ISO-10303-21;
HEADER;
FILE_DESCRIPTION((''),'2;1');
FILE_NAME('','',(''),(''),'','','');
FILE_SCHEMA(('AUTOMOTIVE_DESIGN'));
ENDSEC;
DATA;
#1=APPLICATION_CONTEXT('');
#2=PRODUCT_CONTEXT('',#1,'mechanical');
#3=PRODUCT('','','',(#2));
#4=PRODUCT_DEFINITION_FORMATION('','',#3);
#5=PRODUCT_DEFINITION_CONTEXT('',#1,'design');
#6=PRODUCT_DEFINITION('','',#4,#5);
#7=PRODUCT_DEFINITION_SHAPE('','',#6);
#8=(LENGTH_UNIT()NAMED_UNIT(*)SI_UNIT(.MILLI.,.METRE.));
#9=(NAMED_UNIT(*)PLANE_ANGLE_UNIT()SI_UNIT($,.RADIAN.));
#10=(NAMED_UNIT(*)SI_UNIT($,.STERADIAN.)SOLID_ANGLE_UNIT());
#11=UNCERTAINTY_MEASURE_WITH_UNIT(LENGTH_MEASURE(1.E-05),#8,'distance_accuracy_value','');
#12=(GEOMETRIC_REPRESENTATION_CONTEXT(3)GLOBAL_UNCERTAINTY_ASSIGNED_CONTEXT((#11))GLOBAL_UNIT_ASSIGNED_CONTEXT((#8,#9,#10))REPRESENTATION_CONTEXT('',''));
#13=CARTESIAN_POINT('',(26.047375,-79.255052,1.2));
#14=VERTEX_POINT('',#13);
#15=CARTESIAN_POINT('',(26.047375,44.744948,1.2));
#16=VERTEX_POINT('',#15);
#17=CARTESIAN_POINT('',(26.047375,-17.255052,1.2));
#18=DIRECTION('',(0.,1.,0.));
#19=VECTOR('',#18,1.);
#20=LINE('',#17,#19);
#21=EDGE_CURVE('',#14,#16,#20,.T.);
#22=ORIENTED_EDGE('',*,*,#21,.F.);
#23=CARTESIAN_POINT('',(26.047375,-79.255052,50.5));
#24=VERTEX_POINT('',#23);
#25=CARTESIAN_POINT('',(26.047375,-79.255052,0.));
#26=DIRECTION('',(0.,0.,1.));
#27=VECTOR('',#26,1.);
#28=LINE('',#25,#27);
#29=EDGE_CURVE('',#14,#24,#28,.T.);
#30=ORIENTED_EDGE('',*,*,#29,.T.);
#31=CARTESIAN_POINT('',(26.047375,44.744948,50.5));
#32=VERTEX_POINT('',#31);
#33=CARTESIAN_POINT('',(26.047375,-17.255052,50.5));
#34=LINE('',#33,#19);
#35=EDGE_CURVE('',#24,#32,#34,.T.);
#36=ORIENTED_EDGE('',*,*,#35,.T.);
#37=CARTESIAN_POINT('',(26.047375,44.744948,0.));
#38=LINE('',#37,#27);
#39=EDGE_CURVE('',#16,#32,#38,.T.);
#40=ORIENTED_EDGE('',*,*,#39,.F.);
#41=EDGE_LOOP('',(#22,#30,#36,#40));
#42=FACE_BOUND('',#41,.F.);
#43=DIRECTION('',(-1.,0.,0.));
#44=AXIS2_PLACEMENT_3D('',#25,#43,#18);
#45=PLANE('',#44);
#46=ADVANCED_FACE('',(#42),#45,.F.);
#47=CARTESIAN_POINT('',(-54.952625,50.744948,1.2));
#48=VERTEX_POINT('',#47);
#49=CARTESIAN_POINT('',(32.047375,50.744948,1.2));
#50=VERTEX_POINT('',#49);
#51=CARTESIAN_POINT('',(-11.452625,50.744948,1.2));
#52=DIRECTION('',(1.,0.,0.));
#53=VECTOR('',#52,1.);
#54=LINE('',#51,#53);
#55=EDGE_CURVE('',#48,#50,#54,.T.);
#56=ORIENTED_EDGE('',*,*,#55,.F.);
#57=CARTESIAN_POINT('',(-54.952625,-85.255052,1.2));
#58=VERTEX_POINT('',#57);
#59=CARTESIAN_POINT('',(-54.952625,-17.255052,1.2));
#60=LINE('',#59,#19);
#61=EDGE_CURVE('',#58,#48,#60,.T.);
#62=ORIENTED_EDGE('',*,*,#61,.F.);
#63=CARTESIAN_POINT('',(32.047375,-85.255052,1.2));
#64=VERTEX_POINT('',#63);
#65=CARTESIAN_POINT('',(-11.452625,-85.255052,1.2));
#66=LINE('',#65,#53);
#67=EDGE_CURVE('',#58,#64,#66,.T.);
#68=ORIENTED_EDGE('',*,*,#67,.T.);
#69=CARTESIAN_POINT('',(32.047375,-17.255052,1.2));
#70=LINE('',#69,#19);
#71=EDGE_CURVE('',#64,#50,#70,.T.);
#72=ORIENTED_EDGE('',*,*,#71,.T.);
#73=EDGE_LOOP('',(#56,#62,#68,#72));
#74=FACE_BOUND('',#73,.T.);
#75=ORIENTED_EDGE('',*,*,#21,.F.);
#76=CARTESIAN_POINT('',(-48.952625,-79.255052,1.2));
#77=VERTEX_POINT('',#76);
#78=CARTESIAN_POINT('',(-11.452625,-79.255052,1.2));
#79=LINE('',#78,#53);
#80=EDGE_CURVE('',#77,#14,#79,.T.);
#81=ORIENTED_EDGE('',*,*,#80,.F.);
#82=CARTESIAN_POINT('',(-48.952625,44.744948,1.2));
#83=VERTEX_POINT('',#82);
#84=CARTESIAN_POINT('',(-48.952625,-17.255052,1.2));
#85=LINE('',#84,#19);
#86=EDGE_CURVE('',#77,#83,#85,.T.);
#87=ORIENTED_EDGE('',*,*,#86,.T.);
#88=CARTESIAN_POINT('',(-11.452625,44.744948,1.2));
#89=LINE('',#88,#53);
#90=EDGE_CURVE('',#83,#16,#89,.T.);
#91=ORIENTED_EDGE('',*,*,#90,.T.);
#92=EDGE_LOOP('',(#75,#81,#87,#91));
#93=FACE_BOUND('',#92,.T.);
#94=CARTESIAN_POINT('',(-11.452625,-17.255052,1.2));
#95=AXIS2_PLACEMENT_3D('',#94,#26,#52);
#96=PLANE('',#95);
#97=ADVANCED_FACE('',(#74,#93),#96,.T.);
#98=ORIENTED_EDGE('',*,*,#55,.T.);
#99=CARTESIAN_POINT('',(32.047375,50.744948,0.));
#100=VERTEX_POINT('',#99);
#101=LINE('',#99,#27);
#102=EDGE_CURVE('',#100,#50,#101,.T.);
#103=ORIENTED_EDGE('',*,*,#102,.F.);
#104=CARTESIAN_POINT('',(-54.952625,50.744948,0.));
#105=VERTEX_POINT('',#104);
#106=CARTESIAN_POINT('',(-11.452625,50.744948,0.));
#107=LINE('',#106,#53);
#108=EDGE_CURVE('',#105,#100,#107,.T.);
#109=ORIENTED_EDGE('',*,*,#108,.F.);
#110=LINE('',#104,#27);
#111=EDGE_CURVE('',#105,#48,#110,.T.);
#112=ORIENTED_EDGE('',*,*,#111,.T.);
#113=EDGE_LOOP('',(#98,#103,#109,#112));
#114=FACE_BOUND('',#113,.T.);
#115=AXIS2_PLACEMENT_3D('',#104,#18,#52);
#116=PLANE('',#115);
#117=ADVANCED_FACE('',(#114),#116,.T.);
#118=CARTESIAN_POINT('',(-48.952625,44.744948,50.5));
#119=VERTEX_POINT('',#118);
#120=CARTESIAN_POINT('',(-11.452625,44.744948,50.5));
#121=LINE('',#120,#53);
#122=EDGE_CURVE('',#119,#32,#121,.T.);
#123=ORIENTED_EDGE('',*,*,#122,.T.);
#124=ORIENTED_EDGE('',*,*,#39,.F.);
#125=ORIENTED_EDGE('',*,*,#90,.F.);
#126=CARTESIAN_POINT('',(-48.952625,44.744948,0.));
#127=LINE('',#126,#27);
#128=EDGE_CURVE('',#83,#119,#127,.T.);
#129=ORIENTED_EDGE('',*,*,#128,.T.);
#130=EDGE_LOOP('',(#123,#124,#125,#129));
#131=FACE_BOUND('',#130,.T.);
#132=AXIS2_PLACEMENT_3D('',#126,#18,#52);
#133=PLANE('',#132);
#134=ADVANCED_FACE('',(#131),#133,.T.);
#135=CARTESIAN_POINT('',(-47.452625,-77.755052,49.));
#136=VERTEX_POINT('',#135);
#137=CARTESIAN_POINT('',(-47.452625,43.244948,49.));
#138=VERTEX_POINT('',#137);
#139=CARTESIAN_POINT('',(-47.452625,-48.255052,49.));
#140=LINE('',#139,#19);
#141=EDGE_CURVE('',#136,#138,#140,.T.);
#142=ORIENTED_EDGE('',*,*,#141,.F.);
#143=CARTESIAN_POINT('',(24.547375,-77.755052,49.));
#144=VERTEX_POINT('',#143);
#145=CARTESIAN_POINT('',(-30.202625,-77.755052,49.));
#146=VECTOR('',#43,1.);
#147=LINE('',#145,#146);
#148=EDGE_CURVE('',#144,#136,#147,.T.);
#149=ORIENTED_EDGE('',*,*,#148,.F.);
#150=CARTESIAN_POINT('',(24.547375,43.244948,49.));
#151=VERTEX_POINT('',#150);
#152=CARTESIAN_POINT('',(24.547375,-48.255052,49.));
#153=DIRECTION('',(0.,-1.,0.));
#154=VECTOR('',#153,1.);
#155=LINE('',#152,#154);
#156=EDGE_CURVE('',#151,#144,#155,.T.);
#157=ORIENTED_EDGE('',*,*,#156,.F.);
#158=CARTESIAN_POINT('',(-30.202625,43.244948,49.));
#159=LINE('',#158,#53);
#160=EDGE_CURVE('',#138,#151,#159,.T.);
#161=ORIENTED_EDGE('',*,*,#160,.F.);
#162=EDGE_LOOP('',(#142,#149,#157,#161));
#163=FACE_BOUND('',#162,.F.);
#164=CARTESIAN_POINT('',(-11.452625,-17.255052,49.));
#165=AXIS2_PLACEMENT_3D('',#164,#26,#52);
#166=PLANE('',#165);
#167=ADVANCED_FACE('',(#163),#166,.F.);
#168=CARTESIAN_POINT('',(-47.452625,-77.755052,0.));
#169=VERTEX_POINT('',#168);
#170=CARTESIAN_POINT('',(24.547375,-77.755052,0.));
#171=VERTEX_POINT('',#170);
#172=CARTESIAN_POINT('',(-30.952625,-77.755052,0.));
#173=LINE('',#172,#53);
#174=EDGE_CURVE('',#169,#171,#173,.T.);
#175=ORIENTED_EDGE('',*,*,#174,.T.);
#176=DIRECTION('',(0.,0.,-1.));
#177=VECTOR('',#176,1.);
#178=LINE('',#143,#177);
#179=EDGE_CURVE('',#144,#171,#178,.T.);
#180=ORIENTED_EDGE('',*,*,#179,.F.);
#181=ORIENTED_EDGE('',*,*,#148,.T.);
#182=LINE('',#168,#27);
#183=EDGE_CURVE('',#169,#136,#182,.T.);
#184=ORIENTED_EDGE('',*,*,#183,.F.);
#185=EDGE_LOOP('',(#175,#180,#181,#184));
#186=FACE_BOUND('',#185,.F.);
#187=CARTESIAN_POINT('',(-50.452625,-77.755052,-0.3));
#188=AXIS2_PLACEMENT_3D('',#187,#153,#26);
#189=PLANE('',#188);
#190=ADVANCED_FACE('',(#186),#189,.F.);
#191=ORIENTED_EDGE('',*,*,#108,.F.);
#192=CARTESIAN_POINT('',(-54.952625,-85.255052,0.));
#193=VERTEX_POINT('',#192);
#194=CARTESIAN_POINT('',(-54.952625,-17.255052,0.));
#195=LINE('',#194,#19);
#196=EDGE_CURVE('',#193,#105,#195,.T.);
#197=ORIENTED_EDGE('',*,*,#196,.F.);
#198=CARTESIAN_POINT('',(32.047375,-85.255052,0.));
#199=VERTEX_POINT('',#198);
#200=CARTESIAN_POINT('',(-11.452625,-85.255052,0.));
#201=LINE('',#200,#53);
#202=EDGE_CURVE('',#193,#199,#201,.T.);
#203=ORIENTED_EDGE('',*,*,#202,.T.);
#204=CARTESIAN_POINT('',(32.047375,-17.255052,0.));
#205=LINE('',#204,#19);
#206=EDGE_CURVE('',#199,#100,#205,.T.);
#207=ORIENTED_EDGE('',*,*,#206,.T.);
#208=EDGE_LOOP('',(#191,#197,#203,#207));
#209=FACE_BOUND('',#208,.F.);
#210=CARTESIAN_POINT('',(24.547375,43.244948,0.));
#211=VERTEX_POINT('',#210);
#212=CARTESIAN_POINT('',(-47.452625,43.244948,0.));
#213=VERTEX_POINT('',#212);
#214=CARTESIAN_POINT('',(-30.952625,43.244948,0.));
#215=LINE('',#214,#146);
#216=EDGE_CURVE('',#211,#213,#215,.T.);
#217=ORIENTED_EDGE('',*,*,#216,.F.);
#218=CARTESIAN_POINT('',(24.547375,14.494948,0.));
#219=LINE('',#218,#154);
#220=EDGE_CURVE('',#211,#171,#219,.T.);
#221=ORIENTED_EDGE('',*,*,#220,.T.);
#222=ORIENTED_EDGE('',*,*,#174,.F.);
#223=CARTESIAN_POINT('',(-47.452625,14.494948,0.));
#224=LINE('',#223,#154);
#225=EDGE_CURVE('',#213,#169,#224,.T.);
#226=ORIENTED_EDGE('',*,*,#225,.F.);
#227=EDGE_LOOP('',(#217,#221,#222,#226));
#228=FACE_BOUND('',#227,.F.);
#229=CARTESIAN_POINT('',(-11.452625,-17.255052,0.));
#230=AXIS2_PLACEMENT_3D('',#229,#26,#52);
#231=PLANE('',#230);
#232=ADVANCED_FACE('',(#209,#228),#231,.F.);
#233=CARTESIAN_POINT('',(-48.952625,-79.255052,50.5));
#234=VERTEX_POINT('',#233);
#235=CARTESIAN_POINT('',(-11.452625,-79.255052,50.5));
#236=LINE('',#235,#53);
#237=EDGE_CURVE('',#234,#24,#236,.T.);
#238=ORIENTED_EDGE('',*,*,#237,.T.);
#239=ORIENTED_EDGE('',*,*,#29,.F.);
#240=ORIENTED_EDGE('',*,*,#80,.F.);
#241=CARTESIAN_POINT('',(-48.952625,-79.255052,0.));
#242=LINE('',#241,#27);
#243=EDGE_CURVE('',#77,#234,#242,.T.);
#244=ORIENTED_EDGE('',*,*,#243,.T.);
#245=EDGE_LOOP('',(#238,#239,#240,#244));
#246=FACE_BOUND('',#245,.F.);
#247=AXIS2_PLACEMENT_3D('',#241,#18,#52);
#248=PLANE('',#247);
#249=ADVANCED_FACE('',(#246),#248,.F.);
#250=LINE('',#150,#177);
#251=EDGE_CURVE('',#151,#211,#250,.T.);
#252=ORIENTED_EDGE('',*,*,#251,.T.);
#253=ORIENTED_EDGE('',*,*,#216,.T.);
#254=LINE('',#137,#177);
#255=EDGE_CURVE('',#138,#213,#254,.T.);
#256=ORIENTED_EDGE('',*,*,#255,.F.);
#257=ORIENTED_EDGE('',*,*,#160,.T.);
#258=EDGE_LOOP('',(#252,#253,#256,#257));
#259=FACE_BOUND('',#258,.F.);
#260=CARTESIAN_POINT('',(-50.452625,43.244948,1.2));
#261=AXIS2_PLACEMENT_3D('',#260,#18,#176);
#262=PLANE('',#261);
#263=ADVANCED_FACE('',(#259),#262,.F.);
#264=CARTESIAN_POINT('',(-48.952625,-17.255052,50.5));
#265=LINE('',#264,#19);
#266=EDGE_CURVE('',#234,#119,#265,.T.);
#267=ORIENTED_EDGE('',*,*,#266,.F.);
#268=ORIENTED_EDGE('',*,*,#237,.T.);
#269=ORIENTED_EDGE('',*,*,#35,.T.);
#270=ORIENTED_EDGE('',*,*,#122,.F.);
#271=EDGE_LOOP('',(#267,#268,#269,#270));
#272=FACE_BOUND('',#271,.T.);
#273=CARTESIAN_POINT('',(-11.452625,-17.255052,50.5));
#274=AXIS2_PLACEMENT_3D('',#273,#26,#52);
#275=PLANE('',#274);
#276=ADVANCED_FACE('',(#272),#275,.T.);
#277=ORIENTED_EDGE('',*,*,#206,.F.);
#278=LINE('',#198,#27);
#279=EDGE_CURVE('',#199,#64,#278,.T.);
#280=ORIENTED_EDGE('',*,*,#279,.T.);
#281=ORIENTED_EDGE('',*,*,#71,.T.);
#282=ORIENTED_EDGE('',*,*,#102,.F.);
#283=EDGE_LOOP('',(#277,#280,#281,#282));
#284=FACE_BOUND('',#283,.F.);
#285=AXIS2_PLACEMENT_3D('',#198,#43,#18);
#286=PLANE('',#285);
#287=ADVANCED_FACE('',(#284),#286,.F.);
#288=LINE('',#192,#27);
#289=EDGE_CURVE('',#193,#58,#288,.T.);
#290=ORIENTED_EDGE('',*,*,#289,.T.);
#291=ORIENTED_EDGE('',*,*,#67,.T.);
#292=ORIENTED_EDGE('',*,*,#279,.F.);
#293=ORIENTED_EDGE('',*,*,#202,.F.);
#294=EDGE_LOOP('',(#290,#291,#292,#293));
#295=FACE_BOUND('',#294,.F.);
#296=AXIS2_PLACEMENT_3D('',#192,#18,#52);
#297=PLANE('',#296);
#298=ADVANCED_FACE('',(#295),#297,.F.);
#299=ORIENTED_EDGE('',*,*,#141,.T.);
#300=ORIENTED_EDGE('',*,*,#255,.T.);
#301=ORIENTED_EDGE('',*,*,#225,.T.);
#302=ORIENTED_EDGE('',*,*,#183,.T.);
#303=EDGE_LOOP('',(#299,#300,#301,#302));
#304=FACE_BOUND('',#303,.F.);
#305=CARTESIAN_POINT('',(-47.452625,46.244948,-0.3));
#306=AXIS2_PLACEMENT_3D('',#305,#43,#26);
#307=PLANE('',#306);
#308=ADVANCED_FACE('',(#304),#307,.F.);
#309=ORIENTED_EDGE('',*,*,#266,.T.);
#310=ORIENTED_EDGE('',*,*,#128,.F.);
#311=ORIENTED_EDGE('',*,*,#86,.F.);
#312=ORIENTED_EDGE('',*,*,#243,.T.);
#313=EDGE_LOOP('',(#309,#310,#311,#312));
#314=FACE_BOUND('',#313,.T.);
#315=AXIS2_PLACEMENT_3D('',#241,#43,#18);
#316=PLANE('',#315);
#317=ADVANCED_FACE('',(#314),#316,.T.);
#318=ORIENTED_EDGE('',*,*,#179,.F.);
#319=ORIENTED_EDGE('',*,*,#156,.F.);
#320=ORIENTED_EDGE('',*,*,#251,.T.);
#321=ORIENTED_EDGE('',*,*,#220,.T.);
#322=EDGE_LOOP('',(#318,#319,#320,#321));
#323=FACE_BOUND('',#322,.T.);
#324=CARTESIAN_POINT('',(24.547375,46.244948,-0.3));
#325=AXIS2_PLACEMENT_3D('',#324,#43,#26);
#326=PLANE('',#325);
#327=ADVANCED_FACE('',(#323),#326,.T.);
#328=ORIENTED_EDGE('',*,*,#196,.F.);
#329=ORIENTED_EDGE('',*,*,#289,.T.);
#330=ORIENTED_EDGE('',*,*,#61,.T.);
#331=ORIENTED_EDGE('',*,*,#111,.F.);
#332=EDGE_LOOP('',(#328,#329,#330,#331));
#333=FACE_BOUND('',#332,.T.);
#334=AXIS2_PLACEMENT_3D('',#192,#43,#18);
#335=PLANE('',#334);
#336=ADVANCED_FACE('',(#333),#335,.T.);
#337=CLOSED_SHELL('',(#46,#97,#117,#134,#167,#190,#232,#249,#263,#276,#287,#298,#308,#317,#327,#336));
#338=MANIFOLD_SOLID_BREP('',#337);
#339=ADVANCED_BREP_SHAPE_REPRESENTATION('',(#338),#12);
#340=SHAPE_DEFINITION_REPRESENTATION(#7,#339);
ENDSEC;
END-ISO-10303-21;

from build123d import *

# Parameters (mm, degrees)
F0_W        = 75
F0_H        = 124
F1_DEPTH    = 50.5
F0_W_2      = 87
F0_H_2      = 136
F2_DEPTH    = 1.2
F3_T        = 1.5
F3_T3_DEPTH = 78
F3_T5_DEPTH = 127


# Not quite as in the source:
# - a shell that OpenCascade refuses in one call is made with other operations: the cavity is built on its own and cut out


with BuildPart() as f1:
    # F0 (on Top) → F1 (new body)
    with BuildSketch(Plane.XY):
        with Locations((-11.4526251853, -17.2550516479)):
            Rectangle(F0_W, F0_H)
    extrude(amount=F1_DEPTH)

    # F0 (on Top) → F2 (join)
    with BuildSketch(Plane.XY):
        with Locations((-11.4526251853, -17.2550516479)):
            Rectangle(F0_W_2, F0_H_2)
        with Locations((-11.4526251853, -17.2550516479)):
            Rectangle(F0_W, F0_H, mode=Mode.SUBTRACT)
    extrude(amount=F2_DEPTH)

    # F3: shell of thickness 1.5, made by hand


with BuildPart() as f3_core1:
    # F3_t2: copy of F1
    add(f1.part)

    # the walls: a layer under each face that stays
    f3_faces = [f3_core1.faces().sort_by_distance(p)[0] for p in [
        (-11.4526251853, 44.7449483521, 25.85),
        (-52.0526251853, -80.7217183146, 1.2),
        (-48.9526251853, -17.2550516479, 25.85),
        (-11.4526251853, -17.2550516479, 50.5),
        (26.0473748147, -17.2550516479, 25.85),
        (-11.4526251853, -85.2550516479, 0.6),
        (32.0473748147, -17.2550516479, 0.6),
        (-11.4526251853, 50.7449483521, 0.6),
        (-54.9526251853, -17.2550516479, 0.6),
        (-11.4526251853, -79.2550516479, 25.85),
    ]]
    thicken(f3_faces, amount=-F3_T, mode=Mode.SUBTRACT)

    # F3_s4 → F3_t3 (cut)
    with BuildSketch(Plane.YZ.offset(-50.4526251853)):
        Polygon((44.7599483521, 1.215), (43.2449483521, 1.2), (43.2449483521, -0.3), (44.7449483521, -0.3), align=None)
        Polygon((-79.2700516479, 1.215), (-79.2550516479, -0.3), (-77.7550516479, -0.3), (-77.7550516479, 1.2), align=None)
    extrude(amount=F3_T3_DEPTH, mode=Mode.SUBTRACT)

    # F3_s6 → F3_t5 (cut)
    with BuildSketch(Plane.XZ.offset(-46.2449483521)):
        Polygon((26.0623748147, 1.215), (26.0473748147, -0.3), (24.5473748147, -0.3), (24.5473748147, 1.2), align=None)
        Polygon((-48.9676251853, 1.215), (-48.9526251853, -0.3), (-47.4526251853, -0.3), (-47.4526251853, 1.2), align=None)
    extrude(amount=F3_T5_DEPTH, mode=Mode.SUBTRACT)


with BuildPart() as f1_1:
    add(f1.part)

    # what is left inside the walls is the cavity
    f3_cavity = [f3_core1.part.solids().sort_by_distance(p)[0] for p in [
        (-11.452625, -37.421718, 0.015),
    ]]
    add(f3_cavity, mode=Mode.SUBTRACT)


solid = f1_1.part
